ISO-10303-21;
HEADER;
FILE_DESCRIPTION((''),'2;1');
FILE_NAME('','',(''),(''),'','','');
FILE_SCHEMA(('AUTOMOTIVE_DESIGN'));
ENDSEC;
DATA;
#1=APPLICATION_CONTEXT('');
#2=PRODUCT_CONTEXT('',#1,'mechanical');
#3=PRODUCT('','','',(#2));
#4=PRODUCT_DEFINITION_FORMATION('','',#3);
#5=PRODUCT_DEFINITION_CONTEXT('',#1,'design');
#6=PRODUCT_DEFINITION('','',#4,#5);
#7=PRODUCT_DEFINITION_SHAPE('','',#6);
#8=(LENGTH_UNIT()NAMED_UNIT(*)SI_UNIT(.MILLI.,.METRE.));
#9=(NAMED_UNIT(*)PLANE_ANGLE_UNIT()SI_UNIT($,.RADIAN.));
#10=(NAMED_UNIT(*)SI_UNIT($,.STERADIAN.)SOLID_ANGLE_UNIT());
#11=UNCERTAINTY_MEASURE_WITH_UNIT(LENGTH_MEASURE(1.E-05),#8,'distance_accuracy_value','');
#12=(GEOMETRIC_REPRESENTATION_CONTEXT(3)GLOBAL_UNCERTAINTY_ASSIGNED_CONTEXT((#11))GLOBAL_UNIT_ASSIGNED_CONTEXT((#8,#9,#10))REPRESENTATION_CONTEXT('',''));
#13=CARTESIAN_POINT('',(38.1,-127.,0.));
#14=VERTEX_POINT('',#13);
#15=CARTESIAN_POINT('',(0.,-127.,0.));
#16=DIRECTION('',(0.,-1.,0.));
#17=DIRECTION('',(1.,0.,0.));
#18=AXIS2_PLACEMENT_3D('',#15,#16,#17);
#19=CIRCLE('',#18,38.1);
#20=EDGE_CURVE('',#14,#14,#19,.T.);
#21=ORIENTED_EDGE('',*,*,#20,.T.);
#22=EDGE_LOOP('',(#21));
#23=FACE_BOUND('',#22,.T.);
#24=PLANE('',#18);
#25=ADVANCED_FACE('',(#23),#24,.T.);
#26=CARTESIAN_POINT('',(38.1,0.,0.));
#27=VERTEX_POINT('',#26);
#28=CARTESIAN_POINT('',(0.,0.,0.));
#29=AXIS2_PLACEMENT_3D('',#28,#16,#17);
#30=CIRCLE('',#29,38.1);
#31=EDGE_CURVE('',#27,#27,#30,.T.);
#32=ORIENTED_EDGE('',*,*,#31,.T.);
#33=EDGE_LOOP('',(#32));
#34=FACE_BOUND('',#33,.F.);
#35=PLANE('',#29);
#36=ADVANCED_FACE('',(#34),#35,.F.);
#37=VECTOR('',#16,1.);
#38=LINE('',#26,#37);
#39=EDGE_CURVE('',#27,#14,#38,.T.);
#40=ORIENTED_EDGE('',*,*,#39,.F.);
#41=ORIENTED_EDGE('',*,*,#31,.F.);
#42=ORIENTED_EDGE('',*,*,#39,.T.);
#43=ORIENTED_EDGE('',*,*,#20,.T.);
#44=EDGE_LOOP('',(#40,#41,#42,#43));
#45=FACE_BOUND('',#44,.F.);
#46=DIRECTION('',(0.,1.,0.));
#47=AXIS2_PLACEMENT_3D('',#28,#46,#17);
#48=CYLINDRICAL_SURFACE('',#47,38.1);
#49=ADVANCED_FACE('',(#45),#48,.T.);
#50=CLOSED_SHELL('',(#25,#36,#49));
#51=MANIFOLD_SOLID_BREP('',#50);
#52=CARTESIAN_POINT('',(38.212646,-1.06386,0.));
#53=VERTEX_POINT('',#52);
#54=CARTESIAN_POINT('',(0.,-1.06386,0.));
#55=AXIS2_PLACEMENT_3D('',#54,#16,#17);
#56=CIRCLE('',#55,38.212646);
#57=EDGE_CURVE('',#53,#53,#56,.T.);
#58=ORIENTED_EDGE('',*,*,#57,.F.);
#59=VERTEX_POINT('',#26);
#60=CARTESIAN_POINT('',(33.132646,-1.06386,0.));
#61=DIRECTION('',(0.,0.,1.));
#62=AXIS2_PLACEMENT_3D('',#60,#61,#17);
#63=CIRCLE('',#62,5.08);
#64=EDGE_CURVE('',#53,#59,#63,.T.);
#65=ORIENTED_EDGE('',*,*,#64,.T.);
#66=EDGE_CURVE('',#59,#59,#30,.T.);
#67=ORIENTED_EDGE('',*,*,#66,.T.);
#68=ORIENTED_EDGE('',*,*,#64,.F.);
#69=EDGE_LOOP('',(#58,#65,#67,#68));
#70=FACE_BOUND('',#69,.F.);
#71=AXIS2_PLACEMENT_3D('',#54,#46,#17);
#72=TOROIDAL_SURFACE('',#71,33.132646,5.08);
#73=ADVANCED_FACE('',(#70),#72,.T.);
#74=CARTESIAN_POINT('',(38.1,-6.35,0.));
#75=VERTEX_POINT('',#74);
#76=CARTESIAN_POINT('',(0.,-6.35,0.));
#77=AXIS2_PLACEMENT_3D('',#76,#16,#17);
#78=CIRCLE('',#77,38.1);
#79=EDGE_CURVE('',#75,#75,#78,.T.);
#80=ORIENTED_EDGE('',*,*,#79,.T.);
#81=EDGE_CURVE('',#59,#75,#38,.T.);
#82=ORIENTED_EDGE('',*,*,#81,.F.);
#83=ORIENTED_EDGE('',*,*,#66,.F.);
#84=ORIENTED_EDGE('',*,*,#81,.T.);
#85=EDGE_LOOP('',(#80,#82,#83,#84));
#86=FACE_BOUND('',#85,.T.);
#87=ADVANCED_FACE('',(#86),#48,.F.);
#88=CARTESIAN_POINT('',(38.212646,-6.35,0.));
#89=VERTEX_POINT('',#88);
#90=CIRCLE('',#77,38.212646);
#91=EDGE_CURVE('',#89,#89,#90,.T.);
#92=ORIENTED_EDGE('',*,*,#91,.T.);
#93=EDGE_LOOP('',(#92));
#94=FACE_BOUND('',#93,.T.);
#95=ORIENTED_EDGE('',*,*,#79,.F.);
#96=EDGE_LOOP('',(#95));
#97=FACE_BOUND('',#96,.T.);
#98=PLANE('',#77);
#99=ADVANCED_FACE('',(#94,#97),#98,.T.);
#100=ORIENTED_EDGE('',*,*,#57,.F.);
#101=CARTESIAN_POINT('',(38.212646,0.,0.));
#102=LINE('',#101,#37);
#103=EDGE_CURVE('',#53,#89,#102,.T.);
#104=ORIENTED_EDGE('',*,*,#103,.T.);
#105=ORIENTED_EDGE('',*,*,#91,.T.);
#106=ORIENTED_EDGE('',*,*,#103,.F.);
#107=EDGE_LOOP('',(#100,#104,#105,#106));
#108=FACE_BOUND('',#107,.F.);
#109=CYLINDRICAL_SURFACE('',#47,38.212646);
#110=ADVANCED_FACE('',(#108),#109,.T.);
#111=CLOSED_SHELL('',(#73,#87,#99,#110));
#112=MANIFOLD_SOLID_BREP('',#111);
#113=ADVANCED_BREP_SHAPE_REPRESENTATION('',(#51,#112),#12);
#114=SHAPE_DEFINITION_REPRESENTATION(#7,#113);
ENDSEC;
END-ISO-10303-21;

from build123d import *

# Parameters (mm, degrees)
F0_R     = 38.2126464565
F0_R_2   = 38.1
F1_DEPTH = 6.35
F2_DEPTH = 127


# Not quite as in the source:
# - a fillet or chamfer that OpenCascade refuses, or shapes differently, is made with other operations: its cross-section is extruded or revolved along the edge and cut away or added
# - the program builds the solid bodies; features that only make, move or delete a surface that nothing else refers to are left out


with BuildPart() as f1:
    # F0 (on Front) → F1 (new body)
    with BuildSketch(Plane.XZ):
        Circle(F0_R)
        Circle(F0_R_2, mode=Mode.SUBTRACT)
    extrude(amount=F1_DEPTH)

    # F4: fillet of radius 5.08 on 1 edges, made by hand

    # F4_s1 → F4_t2 (revolve, cut)
    with BuildSketch(Plane.XY):
        with BuildLine():
            ThreePointArc((38.2126464565, -1.0638603171), (38.1844063479, -0.5289565878), (38.1, 0))
            Line((38.1, 0), (38.1993470709, 0.0212772063))
            ThreePointArc((38.1993470709, 0.0212772063), (38.1563232283, 0.1016), (38.2126464565, 0.1016))
            Line((38.2126464565, 0.1016), (38.3142464565, 0))
            Line((38.3142464565, 0), (38.3142464565, -1.0638603171))
            Line((38.3142464565, -1.0638603171), (38.2126464565, -1.0638603171))
        make_face()
    revolve(axis=Axis((0, 0, 0), (0, -1, 0)), mode=Mode.SUBTRACT)


with BuildPart() as f2:
    # F0 (on Front) → F2 (new body)
    with BuildSketch(Plane.XZ):
        Circle(F0_R_2)
    extrude(amount=F2_DEPTH)


solid = Compound([f1.part, f2.part])
